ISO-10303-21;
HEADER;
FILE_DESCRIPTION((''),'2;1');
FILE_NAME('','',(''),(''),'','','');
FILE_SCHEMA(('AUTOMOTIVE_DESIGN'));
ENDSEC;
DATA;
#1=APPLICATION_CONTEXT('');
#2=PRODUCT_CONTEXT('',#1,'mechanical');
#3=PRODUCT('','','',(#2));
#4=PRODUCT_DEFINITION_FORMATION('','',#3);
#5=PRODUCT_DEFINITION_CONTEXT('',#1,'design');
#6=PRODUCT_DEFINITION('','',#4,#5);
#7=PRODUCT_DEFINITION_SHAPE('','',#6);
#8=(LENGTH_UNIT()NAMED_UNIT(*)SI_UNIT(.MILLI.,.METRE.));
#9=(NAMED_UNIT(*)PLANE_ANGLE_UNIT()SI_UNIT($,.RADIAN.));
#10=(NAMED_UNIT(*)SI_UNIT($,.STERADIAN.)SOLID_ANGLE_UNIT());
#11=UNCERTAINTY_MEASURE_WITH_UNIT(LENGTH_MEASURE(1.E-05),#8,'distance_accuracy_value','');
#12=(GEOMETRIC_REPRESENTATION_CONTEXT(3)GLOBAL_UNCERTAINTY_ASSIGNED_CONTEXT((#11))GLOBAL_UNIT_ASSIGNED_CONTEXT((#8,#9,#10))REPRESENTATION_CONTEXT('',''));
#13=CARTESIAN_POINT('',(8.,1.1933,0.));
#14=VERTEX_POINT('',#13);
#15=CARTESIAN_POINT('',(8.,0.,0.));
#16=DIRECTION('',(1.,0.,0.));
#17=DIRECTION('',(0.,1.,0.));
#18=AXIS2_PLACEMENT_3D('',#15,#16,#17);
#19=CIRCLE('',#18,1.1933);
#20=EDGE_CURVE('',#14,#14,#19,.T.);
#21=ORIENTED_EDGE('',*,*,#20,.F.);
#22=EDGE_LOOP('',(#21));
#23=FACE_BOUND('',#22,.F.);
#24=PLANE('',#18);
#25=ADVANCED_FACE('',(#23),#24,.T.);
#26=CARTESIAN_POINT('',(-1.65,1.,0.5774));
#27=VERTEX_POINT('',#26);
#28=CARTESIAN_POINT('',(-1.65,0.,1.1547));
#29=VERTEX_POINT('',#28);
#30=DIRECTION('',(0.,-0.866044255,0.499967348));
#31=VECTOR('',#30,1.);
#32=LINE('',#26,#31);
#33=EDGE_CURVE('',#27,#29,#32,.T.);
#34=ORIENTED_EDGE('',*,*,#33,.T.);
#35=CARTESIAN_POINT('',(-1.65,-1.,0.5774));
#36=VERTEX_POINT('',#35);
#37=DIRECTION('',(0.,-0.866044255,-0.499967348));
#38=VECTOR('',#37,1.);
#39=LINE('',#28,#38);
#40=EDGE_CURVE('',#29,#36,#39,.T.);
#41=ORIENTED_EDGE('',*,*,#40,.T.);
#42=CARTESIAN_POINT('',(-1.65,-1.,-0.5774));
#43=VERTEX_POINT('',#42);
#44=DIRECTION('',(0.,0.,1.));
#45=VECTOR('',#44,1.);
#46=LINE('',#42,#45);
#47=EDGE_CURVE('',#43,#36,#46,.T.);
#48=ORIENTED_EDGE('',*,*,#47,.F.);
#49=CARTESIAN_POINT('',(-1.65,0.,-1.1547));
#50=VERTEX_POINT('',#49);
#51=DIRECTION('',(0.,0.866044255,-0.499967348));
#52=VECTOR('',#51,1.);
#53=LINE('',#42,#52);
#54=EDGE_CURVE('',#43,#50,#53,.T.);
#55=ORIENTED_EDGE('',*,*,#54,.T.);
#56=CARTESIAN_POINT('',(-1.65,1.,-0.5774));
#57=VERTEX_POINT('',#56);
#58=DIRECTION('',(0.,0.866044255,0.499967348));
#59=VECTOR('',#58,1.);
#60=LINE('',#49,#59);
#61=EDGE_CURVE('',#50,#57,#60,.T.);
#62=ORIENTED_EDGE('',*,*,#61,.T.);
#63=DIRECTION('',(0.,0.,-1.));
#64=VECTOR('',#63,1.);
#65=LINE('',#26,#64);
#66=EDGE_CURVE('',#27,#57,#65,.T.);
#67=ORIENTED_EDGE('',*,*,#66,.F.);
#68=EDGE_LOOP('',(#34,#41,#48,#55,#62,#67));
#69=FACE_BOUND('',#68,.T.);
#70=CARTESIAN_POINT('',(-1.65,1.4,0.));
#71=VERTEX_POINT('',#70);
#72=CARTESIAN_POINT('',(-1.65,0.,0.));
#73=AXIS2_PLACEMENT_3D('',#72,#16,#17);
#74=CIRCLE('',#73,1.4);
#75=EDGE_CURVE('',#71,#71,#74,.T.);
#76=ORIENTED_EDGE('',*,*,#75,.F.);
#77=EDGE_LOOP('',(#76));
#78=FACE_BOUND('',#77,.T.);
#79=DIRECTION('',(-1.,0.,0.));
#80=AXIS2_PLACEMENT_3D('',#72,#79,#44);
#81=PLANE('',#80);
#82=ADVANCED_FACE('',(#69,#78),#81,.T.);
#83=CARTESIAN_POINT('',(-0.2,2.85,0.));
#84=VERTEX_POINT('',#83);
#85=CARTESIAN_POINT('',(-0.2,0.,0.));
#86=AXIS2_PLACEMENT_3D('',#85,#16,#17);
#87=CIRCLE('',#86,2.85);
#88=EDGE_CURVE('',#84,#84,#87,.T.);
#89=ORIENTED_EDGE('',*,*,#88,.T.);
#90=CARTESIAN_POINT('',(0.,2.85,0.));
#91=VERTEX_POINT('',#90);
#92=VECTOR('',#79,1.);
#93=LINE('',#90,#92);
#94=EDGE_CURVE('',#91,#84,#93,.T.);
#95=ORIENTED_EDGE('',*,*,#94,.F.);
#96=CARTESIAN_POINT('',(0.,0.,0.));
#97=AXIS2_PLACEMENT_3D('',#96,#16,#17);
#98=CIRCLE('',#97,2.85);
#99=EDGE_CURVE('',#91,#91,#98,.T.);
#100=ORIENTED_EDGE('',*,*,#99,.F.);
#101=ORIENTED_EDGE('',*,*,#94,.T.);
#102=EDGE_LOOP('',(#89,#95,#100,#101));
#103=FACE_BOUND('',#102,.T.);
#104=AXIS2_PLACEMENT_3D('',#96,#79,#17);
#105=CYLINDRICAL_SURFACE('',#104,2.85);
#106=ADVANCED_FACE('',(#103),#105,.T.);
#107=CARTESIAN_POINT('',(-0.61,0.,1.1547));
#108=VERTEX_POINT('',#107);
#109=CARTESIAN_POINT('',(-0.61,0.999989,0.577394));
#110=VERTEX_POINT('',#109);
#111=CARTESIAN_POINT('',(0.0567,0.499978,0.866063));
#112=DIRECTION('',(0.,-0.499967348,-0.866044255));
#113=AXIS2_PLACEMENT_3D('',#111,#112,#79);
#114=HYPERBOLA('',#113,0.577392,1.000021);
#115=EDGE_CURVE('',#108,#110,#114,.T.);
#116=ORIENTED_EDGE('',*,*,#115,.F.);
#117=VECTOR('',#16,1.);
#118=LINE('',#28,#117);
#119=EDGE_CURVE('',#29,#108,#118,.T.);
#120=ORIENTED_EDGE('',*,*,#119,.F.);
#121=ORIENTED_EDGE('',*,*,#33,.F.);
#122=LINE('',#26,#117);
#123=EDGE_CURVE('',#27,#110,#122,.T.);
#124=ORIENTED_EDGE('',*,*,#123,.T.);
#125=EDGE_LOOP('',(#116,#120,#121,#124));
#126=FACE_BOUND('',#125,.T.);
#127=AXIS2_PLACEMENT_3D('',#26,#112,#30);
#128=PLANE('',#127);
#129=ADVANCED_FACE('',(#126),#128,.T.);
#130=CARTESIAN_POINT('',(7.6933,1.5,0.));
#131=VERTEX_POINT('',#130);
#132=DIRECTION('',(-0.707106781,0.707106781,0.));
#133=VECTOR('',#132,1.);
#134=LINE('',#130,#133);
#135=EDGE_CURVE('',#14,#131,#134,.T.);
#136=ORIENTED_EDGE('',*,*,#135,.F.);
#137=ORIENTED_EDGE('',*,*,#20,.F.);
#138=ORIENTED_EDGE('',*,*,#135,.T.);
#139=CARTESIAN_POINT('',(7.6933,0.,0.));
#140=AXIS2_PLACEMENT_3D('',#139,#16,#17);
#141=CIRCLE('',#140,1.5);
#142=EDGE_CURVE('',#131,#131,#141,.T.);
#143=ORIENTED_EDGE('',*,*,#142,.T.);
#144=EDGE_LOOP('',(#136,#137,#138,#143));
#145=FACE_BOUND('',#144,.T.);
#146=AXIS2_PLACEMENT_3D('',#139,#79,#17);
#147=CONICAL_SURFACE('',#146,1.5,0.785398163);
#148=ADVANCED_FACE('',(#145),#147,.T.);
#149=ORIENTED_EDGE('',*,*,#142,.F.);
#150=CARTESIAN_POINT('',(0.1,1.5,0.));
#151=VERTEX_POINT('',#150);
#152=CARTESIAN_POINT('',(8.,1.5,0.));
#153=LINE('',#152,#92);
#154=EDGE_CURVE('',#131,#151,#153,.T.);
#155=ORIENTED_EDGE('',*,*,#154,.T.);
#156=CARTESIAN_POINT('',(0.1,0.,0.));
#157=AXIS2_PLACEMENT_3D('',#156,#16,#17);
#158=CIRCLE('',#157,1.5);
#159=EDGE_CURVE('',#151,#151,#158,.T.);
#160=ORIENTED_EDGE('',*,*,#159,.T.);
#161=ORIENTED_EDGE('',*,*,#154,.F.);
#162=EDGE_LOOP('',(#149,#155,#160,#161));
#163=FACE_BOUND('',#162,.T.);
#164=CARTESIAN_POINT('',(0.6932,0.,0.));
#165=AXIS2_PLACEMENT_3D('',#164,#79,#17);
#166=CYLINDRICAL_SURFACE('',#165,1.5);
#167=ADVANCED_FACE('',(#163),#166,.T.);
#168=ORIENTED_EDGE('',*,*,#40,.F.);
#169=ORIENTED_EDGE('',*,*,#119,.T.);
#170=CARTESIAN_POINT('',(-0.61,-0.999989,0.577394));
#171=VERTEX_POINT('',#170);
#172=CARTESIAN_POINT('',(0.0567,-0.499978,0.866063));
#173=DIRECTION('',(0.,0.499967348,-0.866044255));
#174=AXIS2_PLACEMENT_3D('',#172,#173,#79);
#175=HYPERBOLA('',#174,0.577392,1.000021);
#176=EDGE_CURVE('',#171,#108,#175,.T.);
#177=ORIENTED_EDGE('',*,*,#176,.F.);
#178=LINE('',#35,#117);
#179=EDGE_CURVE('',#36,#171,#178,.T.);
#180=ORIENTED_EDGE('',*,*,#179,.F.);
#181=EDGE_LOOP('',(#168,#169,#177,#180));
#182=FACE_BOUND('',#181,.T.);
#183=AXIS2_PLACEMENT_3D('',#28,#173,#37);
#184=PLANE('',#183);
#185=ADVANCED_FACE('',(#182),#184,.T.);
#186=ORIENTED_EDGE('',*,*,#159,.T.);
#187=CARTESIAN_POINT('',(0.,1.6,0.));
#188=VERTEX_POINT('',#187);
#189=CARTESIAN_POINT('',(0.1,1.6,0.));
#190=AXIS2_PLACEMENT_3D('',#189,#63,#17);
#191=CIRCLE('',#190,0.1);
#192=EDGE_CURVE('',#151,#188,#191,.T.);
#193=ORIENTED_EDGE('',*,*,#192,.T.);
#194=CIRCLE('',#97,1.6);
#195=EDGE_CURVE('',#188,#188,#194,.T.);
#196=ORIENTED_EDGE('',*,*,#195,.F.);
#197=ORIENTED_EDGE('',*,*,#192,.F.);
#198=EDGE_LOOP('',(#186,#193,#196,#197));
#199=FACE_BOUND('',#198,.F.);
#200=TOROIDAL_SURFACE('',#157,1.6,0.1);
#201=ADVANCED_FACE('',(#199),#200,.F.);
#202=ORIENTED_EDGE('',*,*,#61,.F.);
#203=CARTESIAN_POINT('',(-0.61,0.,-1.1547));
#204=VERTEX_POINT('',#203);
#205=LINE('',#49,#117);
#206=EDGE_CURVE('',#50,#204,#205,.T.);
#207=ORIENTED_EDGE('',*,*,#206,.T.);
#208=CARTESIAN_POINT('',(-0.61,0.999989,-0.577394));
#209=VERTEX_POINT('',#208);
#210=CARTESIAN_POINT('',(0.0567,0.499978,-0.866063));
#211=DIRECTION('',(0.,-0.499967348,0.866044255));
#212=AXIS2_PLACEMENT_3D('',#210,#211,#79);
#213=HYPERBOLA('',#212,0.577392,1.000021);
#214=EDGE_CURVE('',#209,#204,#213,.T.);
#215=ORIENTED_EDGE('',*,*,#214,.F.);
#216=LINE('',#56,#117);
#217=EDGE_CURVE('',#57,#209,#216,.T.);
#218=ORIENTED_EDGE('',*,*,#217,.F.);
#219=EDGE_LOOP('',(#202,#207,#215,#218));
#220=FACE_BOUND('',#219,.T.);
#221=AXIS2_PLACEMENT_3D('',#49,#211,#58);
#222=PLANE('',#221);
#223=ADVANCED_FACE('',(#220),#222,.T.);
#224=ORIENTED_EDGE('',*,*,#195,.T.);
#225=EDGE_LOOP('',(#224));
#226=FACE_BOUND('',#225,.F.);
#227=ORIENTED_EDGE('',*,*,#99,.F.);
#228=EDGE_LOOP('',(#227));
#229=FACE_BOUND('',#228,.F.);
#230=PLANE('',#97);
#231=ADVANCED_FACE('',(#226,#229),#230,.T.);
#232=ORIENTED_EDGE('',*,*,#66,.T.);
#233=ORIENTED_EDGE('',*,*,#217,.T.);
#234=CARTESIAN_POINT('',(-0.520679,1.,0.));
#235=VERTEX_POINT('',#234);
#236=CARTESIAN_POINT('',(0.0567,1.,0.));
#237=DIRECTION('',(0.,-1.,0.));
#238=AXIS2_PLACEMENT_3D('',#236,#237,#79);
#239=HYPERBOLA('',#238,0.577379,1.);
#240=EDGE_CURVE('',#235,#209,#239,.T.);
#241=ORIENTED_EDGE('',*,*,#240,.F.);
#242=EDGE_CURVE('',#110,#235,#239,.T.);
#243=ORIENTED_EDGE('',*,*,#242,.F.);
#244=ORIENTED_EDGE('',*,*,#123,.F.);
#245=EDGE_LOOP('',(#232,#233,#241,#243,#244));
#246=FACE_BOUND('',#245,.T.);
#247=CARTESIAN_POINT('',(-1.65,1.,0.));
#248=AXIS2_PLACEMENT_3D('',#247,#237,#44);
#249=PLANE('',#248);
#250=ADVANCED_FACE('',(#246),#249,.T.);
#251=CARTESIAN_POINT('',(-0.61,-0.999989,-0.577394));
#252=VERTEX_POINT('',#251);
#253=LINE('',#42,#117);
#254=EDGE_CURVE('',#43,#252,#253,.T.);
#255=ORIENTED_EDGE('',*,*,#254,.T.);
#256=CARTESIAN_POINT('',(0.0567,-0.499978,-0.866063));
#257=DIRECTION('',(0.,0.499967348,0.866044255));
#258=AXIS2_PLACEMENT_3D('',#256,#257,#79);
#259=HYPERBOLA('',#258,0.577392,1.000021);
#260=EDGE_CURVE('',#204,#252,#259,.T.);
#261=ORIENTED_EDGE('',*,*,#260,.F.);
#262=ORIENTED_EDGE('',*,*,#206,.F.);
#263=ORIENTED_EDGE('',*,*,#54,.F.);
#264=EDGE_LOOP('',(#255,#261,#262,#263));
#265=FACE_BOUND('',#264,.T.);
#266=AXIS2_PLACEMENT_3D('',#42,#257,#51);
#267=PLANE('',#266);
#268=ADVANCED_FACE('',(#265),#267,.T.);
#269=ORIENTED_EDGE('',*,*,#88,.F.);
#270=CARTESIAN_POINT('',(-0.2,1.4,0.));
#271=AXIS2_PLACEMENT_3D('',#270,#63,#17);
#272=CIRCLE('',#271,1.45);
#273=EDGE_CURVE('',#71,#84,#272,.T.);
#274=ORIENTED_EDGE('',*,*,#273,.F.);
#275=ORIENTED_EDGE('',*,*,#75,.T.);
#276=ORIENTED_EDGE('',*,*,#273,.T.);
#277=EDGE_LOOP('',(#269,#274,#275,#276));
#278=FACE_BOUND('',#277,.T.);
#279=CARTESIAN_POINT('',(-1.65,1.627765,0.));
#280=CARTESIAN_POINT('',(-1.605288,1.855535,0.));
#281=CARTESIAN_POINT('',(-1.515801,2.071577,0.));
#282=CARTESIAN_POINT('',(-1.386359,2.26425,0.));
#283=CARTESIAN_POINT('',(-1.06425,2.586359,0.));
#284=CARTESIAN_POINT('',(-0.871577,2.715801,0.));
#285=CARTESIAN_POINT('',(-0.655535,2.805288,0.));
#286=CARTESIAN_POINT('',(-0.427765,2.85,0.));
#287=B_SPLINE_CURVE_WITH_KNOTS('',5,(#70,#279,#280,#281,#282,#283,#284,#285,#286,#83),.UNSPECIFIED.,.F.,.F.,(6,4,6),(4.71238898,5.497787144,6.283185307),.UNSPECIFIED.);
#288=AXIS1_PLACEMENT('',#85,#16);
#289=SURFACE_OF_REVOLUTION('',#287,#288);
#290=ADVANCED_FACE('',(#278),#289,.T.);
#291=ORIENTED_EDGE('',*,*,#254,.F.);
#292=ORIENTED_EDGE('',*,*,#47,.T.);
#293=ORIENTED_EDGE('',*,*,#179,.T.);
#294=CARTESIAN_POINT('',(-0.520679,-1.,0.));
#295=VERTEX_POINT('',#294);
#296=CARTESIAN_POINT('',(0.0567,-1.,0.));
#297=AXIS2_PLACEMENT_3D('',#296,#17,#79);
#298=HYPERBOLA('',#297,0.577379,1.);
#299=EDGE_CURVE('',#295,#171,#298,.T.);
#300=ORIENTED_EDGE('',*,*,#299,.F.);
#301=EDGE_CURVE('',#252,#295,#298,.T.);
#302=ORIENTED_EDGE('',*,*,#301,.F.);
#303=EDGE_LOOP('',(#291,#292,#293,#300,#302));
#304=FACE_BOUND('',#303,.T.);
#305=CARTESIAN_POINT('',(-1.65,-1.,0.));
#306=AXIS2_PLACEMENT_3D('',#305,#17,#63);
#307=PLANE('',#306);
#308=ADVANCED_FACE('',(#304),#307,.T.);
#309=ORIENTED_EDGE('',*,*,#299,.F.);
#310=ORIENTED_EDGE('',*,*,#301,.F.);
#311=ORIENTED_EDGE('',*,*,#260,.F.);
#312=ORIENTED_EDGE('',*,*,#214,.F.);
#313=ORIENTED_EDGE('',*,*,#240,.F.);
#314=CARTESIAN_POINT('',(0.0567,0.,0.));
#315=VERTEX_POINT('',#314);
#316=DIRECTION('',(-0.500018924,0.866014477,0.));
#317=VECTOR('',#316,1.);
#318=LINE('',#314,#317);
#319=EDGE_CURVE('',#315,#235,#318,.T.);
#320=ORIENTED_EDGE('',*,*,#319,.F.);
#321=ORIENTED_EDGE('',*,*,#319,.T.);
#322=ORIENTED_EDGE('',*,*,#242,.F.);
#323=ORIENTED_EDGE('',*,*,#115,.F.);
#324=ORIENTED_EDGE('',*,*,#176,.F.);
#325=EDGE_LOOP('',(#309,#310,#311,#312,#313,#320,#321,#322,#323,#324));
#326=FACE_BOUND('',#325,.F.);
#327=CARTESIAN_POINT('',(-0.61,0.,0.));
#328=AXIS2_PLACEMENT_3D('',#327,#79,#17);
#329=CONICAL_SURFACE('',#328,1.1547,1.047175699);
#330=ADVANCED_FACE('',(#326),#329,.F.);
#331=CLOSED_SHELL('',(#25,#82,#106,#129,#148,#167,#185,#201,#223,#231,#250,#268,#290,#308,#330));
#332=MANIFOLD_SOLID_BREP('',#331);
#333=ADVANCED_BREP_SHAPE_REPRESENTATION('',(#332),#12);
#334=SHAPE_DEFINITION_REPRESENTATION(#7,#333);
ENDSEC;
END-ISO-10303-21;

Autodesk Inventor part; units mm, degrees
ref_plane "YZ Plane" through (0, 0, 0) normal (1, 0, 0) x (0, 1, 0)
ref_plane "XZ Plane" through (0, 0, 0) normal (0, 1, 0) x (-1, 0, 0)
sketch "Sketch1" plane through (0, 0, 0) normal (0, 0, 1) x (1, 0, 0)
  line L0 (0.0567, 0) -> (8, 0)
  line L1 (8, 0) -> (8, 1.5)
  line L2 (8, 1.5) -> (1, 1.5)
  line L3 (1, 1.5) -> (0.6932, 1.5)
  line L4 (0.6932, 1.5) -> (0, 1.5)
  line L5 (0, 1.5) -> (0, 2.85)
  line L6 (0, 2.85) -> (-1.65, 2.85)
  line L7 (-1.65, 2.85) -> (-1.65, 1.1547)
  line L8 (-1.65, 1.1547) -> (-0.61, 1.1547)
  line L9 (-0.61, 1.1547) -> (0.0567, 0)
  line L10 (-3.58, 0) -> (9.93, 0) projected
  line L11 (0, -0.57) -> (0, 3.42) projected
  line L12 (1, 1.5) -> (0, 1.5) construction
  dimension "d1" = 7
  dimension "d2" = 0.3068
  dimension "d3" = 1.65
  dimension "d4" = 1.04
  dimension "d5" = 60
  dimension "d6" = 3
  dimension "d7" = 3
  dimension "d8" = 2.3094
  dimension "d9" = 5.7
  dimension "d26" = 8
revolve "Body" add sketch "Sketch1" angle 360 about axis through (0.0567, 0, 0) along (1, 0, 0) contours L9 L11 L4 L3 L2 L1 L0 | L9 L8 L7 L6 L5 L11
sketch "Sketch2" plane through (-1.65, 0, 0) normal (-1, 0, 0) x (0, 0, 1)
  circle A0 centre (0, 0) radius 1.1547 projected
  line L0 (0, -3.99) -> (0, 3.99) projected
  line L1 (-3.99, 0) -> (3.99, 0) projected
  line L2 (1.1547, 0) -> (0.5774, -1)
  line L3 (0.5774, -1) -> (-0.5774, -1)
  line L4 (-0.5774, -1) -> (-1.1547, 0)
  line L5 (-1.1547, 0) -> (-0.5774, 1)
  line L6 (-0.5774, 1) -> (0.5774, 1)
  line L7 (0.5774, 1) -> (1.1547, 0)
extrude "Slot" add sketch "Sketch2" against normal up to next contours L7 A0 | A0 L2 | L6 L0 A0 | A0 L0 L3 | L0 L6 A0 | A0 L3 L0 | L4 A0 | A0 L5
fillet "Fillet1" radius 1.45 1 edges at (-1.65, -2.85, 0)
thread "Thread" size "M3x0.5" class "6g" standard "ISO Metric profile" length 7
chamfer "Chamfer1" distance 0.3067 distance2 0.3067 1 edges at (8, -1.5, 0) measured on face at (8, 0.5539, 0.4443)
ref_plane "Work Plane1" through (29, 0, 0) normal (0, -1, 0) x (1, 0, 0)
fillet "Fillet2" radius 0.1 1 edges at (0, -1.5, 0)
equation "\"d30\" = R"
equation "\"d17\" = RR"
equation "\"d13\" = GEL"
equation "\"d15\" = -0.5 * SPD + 0.5 * GD"
equation "\"d16\" = GUL"
equation "\"d1\" = GEL"
equation "\"d3\" = KOH"
equation "\"d4\" = INTI"
equation "\"d6\" = GD"
equation "\"d7\" = BDM"
equation "\"d8\" = 1.1547 * SW"
equation "\"d9\" = KOD"
equation "\"d26\" = NLG"
equation "\"GD\" = NND"
equation "\"NLG\" = 8"
equation "\"GEL\" = 7"
equation "\"KOD\" = 5.7"
equation "\"KOH\" = 1.65"
equation "\"INTI\" = 1.04"
equation "\"GAL\" = 0.61345 * PTC"
equation "\"GUL\" = 0.61345 * PTC"
equation "\"BDM\" = NND"
equation "\"SW\" = 2"
equation "\"RR\" = 1.45"
equation "\"SPD\" = NND - 1.2269 * PTC"
equation "\"R\" = 0.1"
equation "\"TOA\" = 30deg"
equation "\"GD1\" = THREADDIA - 1.2269 * PTC"
equation "\"THREADDIA\" = 3"
equation "\"PTC\" = 0.5"
equation "\"NND\" = 3"
equation "\"KOH1\" = 0.2"
equation "\"E0\" = 1.155 * SW"
properties part number "BS 4168 - M3 x 8" material "Steel, Mild"
